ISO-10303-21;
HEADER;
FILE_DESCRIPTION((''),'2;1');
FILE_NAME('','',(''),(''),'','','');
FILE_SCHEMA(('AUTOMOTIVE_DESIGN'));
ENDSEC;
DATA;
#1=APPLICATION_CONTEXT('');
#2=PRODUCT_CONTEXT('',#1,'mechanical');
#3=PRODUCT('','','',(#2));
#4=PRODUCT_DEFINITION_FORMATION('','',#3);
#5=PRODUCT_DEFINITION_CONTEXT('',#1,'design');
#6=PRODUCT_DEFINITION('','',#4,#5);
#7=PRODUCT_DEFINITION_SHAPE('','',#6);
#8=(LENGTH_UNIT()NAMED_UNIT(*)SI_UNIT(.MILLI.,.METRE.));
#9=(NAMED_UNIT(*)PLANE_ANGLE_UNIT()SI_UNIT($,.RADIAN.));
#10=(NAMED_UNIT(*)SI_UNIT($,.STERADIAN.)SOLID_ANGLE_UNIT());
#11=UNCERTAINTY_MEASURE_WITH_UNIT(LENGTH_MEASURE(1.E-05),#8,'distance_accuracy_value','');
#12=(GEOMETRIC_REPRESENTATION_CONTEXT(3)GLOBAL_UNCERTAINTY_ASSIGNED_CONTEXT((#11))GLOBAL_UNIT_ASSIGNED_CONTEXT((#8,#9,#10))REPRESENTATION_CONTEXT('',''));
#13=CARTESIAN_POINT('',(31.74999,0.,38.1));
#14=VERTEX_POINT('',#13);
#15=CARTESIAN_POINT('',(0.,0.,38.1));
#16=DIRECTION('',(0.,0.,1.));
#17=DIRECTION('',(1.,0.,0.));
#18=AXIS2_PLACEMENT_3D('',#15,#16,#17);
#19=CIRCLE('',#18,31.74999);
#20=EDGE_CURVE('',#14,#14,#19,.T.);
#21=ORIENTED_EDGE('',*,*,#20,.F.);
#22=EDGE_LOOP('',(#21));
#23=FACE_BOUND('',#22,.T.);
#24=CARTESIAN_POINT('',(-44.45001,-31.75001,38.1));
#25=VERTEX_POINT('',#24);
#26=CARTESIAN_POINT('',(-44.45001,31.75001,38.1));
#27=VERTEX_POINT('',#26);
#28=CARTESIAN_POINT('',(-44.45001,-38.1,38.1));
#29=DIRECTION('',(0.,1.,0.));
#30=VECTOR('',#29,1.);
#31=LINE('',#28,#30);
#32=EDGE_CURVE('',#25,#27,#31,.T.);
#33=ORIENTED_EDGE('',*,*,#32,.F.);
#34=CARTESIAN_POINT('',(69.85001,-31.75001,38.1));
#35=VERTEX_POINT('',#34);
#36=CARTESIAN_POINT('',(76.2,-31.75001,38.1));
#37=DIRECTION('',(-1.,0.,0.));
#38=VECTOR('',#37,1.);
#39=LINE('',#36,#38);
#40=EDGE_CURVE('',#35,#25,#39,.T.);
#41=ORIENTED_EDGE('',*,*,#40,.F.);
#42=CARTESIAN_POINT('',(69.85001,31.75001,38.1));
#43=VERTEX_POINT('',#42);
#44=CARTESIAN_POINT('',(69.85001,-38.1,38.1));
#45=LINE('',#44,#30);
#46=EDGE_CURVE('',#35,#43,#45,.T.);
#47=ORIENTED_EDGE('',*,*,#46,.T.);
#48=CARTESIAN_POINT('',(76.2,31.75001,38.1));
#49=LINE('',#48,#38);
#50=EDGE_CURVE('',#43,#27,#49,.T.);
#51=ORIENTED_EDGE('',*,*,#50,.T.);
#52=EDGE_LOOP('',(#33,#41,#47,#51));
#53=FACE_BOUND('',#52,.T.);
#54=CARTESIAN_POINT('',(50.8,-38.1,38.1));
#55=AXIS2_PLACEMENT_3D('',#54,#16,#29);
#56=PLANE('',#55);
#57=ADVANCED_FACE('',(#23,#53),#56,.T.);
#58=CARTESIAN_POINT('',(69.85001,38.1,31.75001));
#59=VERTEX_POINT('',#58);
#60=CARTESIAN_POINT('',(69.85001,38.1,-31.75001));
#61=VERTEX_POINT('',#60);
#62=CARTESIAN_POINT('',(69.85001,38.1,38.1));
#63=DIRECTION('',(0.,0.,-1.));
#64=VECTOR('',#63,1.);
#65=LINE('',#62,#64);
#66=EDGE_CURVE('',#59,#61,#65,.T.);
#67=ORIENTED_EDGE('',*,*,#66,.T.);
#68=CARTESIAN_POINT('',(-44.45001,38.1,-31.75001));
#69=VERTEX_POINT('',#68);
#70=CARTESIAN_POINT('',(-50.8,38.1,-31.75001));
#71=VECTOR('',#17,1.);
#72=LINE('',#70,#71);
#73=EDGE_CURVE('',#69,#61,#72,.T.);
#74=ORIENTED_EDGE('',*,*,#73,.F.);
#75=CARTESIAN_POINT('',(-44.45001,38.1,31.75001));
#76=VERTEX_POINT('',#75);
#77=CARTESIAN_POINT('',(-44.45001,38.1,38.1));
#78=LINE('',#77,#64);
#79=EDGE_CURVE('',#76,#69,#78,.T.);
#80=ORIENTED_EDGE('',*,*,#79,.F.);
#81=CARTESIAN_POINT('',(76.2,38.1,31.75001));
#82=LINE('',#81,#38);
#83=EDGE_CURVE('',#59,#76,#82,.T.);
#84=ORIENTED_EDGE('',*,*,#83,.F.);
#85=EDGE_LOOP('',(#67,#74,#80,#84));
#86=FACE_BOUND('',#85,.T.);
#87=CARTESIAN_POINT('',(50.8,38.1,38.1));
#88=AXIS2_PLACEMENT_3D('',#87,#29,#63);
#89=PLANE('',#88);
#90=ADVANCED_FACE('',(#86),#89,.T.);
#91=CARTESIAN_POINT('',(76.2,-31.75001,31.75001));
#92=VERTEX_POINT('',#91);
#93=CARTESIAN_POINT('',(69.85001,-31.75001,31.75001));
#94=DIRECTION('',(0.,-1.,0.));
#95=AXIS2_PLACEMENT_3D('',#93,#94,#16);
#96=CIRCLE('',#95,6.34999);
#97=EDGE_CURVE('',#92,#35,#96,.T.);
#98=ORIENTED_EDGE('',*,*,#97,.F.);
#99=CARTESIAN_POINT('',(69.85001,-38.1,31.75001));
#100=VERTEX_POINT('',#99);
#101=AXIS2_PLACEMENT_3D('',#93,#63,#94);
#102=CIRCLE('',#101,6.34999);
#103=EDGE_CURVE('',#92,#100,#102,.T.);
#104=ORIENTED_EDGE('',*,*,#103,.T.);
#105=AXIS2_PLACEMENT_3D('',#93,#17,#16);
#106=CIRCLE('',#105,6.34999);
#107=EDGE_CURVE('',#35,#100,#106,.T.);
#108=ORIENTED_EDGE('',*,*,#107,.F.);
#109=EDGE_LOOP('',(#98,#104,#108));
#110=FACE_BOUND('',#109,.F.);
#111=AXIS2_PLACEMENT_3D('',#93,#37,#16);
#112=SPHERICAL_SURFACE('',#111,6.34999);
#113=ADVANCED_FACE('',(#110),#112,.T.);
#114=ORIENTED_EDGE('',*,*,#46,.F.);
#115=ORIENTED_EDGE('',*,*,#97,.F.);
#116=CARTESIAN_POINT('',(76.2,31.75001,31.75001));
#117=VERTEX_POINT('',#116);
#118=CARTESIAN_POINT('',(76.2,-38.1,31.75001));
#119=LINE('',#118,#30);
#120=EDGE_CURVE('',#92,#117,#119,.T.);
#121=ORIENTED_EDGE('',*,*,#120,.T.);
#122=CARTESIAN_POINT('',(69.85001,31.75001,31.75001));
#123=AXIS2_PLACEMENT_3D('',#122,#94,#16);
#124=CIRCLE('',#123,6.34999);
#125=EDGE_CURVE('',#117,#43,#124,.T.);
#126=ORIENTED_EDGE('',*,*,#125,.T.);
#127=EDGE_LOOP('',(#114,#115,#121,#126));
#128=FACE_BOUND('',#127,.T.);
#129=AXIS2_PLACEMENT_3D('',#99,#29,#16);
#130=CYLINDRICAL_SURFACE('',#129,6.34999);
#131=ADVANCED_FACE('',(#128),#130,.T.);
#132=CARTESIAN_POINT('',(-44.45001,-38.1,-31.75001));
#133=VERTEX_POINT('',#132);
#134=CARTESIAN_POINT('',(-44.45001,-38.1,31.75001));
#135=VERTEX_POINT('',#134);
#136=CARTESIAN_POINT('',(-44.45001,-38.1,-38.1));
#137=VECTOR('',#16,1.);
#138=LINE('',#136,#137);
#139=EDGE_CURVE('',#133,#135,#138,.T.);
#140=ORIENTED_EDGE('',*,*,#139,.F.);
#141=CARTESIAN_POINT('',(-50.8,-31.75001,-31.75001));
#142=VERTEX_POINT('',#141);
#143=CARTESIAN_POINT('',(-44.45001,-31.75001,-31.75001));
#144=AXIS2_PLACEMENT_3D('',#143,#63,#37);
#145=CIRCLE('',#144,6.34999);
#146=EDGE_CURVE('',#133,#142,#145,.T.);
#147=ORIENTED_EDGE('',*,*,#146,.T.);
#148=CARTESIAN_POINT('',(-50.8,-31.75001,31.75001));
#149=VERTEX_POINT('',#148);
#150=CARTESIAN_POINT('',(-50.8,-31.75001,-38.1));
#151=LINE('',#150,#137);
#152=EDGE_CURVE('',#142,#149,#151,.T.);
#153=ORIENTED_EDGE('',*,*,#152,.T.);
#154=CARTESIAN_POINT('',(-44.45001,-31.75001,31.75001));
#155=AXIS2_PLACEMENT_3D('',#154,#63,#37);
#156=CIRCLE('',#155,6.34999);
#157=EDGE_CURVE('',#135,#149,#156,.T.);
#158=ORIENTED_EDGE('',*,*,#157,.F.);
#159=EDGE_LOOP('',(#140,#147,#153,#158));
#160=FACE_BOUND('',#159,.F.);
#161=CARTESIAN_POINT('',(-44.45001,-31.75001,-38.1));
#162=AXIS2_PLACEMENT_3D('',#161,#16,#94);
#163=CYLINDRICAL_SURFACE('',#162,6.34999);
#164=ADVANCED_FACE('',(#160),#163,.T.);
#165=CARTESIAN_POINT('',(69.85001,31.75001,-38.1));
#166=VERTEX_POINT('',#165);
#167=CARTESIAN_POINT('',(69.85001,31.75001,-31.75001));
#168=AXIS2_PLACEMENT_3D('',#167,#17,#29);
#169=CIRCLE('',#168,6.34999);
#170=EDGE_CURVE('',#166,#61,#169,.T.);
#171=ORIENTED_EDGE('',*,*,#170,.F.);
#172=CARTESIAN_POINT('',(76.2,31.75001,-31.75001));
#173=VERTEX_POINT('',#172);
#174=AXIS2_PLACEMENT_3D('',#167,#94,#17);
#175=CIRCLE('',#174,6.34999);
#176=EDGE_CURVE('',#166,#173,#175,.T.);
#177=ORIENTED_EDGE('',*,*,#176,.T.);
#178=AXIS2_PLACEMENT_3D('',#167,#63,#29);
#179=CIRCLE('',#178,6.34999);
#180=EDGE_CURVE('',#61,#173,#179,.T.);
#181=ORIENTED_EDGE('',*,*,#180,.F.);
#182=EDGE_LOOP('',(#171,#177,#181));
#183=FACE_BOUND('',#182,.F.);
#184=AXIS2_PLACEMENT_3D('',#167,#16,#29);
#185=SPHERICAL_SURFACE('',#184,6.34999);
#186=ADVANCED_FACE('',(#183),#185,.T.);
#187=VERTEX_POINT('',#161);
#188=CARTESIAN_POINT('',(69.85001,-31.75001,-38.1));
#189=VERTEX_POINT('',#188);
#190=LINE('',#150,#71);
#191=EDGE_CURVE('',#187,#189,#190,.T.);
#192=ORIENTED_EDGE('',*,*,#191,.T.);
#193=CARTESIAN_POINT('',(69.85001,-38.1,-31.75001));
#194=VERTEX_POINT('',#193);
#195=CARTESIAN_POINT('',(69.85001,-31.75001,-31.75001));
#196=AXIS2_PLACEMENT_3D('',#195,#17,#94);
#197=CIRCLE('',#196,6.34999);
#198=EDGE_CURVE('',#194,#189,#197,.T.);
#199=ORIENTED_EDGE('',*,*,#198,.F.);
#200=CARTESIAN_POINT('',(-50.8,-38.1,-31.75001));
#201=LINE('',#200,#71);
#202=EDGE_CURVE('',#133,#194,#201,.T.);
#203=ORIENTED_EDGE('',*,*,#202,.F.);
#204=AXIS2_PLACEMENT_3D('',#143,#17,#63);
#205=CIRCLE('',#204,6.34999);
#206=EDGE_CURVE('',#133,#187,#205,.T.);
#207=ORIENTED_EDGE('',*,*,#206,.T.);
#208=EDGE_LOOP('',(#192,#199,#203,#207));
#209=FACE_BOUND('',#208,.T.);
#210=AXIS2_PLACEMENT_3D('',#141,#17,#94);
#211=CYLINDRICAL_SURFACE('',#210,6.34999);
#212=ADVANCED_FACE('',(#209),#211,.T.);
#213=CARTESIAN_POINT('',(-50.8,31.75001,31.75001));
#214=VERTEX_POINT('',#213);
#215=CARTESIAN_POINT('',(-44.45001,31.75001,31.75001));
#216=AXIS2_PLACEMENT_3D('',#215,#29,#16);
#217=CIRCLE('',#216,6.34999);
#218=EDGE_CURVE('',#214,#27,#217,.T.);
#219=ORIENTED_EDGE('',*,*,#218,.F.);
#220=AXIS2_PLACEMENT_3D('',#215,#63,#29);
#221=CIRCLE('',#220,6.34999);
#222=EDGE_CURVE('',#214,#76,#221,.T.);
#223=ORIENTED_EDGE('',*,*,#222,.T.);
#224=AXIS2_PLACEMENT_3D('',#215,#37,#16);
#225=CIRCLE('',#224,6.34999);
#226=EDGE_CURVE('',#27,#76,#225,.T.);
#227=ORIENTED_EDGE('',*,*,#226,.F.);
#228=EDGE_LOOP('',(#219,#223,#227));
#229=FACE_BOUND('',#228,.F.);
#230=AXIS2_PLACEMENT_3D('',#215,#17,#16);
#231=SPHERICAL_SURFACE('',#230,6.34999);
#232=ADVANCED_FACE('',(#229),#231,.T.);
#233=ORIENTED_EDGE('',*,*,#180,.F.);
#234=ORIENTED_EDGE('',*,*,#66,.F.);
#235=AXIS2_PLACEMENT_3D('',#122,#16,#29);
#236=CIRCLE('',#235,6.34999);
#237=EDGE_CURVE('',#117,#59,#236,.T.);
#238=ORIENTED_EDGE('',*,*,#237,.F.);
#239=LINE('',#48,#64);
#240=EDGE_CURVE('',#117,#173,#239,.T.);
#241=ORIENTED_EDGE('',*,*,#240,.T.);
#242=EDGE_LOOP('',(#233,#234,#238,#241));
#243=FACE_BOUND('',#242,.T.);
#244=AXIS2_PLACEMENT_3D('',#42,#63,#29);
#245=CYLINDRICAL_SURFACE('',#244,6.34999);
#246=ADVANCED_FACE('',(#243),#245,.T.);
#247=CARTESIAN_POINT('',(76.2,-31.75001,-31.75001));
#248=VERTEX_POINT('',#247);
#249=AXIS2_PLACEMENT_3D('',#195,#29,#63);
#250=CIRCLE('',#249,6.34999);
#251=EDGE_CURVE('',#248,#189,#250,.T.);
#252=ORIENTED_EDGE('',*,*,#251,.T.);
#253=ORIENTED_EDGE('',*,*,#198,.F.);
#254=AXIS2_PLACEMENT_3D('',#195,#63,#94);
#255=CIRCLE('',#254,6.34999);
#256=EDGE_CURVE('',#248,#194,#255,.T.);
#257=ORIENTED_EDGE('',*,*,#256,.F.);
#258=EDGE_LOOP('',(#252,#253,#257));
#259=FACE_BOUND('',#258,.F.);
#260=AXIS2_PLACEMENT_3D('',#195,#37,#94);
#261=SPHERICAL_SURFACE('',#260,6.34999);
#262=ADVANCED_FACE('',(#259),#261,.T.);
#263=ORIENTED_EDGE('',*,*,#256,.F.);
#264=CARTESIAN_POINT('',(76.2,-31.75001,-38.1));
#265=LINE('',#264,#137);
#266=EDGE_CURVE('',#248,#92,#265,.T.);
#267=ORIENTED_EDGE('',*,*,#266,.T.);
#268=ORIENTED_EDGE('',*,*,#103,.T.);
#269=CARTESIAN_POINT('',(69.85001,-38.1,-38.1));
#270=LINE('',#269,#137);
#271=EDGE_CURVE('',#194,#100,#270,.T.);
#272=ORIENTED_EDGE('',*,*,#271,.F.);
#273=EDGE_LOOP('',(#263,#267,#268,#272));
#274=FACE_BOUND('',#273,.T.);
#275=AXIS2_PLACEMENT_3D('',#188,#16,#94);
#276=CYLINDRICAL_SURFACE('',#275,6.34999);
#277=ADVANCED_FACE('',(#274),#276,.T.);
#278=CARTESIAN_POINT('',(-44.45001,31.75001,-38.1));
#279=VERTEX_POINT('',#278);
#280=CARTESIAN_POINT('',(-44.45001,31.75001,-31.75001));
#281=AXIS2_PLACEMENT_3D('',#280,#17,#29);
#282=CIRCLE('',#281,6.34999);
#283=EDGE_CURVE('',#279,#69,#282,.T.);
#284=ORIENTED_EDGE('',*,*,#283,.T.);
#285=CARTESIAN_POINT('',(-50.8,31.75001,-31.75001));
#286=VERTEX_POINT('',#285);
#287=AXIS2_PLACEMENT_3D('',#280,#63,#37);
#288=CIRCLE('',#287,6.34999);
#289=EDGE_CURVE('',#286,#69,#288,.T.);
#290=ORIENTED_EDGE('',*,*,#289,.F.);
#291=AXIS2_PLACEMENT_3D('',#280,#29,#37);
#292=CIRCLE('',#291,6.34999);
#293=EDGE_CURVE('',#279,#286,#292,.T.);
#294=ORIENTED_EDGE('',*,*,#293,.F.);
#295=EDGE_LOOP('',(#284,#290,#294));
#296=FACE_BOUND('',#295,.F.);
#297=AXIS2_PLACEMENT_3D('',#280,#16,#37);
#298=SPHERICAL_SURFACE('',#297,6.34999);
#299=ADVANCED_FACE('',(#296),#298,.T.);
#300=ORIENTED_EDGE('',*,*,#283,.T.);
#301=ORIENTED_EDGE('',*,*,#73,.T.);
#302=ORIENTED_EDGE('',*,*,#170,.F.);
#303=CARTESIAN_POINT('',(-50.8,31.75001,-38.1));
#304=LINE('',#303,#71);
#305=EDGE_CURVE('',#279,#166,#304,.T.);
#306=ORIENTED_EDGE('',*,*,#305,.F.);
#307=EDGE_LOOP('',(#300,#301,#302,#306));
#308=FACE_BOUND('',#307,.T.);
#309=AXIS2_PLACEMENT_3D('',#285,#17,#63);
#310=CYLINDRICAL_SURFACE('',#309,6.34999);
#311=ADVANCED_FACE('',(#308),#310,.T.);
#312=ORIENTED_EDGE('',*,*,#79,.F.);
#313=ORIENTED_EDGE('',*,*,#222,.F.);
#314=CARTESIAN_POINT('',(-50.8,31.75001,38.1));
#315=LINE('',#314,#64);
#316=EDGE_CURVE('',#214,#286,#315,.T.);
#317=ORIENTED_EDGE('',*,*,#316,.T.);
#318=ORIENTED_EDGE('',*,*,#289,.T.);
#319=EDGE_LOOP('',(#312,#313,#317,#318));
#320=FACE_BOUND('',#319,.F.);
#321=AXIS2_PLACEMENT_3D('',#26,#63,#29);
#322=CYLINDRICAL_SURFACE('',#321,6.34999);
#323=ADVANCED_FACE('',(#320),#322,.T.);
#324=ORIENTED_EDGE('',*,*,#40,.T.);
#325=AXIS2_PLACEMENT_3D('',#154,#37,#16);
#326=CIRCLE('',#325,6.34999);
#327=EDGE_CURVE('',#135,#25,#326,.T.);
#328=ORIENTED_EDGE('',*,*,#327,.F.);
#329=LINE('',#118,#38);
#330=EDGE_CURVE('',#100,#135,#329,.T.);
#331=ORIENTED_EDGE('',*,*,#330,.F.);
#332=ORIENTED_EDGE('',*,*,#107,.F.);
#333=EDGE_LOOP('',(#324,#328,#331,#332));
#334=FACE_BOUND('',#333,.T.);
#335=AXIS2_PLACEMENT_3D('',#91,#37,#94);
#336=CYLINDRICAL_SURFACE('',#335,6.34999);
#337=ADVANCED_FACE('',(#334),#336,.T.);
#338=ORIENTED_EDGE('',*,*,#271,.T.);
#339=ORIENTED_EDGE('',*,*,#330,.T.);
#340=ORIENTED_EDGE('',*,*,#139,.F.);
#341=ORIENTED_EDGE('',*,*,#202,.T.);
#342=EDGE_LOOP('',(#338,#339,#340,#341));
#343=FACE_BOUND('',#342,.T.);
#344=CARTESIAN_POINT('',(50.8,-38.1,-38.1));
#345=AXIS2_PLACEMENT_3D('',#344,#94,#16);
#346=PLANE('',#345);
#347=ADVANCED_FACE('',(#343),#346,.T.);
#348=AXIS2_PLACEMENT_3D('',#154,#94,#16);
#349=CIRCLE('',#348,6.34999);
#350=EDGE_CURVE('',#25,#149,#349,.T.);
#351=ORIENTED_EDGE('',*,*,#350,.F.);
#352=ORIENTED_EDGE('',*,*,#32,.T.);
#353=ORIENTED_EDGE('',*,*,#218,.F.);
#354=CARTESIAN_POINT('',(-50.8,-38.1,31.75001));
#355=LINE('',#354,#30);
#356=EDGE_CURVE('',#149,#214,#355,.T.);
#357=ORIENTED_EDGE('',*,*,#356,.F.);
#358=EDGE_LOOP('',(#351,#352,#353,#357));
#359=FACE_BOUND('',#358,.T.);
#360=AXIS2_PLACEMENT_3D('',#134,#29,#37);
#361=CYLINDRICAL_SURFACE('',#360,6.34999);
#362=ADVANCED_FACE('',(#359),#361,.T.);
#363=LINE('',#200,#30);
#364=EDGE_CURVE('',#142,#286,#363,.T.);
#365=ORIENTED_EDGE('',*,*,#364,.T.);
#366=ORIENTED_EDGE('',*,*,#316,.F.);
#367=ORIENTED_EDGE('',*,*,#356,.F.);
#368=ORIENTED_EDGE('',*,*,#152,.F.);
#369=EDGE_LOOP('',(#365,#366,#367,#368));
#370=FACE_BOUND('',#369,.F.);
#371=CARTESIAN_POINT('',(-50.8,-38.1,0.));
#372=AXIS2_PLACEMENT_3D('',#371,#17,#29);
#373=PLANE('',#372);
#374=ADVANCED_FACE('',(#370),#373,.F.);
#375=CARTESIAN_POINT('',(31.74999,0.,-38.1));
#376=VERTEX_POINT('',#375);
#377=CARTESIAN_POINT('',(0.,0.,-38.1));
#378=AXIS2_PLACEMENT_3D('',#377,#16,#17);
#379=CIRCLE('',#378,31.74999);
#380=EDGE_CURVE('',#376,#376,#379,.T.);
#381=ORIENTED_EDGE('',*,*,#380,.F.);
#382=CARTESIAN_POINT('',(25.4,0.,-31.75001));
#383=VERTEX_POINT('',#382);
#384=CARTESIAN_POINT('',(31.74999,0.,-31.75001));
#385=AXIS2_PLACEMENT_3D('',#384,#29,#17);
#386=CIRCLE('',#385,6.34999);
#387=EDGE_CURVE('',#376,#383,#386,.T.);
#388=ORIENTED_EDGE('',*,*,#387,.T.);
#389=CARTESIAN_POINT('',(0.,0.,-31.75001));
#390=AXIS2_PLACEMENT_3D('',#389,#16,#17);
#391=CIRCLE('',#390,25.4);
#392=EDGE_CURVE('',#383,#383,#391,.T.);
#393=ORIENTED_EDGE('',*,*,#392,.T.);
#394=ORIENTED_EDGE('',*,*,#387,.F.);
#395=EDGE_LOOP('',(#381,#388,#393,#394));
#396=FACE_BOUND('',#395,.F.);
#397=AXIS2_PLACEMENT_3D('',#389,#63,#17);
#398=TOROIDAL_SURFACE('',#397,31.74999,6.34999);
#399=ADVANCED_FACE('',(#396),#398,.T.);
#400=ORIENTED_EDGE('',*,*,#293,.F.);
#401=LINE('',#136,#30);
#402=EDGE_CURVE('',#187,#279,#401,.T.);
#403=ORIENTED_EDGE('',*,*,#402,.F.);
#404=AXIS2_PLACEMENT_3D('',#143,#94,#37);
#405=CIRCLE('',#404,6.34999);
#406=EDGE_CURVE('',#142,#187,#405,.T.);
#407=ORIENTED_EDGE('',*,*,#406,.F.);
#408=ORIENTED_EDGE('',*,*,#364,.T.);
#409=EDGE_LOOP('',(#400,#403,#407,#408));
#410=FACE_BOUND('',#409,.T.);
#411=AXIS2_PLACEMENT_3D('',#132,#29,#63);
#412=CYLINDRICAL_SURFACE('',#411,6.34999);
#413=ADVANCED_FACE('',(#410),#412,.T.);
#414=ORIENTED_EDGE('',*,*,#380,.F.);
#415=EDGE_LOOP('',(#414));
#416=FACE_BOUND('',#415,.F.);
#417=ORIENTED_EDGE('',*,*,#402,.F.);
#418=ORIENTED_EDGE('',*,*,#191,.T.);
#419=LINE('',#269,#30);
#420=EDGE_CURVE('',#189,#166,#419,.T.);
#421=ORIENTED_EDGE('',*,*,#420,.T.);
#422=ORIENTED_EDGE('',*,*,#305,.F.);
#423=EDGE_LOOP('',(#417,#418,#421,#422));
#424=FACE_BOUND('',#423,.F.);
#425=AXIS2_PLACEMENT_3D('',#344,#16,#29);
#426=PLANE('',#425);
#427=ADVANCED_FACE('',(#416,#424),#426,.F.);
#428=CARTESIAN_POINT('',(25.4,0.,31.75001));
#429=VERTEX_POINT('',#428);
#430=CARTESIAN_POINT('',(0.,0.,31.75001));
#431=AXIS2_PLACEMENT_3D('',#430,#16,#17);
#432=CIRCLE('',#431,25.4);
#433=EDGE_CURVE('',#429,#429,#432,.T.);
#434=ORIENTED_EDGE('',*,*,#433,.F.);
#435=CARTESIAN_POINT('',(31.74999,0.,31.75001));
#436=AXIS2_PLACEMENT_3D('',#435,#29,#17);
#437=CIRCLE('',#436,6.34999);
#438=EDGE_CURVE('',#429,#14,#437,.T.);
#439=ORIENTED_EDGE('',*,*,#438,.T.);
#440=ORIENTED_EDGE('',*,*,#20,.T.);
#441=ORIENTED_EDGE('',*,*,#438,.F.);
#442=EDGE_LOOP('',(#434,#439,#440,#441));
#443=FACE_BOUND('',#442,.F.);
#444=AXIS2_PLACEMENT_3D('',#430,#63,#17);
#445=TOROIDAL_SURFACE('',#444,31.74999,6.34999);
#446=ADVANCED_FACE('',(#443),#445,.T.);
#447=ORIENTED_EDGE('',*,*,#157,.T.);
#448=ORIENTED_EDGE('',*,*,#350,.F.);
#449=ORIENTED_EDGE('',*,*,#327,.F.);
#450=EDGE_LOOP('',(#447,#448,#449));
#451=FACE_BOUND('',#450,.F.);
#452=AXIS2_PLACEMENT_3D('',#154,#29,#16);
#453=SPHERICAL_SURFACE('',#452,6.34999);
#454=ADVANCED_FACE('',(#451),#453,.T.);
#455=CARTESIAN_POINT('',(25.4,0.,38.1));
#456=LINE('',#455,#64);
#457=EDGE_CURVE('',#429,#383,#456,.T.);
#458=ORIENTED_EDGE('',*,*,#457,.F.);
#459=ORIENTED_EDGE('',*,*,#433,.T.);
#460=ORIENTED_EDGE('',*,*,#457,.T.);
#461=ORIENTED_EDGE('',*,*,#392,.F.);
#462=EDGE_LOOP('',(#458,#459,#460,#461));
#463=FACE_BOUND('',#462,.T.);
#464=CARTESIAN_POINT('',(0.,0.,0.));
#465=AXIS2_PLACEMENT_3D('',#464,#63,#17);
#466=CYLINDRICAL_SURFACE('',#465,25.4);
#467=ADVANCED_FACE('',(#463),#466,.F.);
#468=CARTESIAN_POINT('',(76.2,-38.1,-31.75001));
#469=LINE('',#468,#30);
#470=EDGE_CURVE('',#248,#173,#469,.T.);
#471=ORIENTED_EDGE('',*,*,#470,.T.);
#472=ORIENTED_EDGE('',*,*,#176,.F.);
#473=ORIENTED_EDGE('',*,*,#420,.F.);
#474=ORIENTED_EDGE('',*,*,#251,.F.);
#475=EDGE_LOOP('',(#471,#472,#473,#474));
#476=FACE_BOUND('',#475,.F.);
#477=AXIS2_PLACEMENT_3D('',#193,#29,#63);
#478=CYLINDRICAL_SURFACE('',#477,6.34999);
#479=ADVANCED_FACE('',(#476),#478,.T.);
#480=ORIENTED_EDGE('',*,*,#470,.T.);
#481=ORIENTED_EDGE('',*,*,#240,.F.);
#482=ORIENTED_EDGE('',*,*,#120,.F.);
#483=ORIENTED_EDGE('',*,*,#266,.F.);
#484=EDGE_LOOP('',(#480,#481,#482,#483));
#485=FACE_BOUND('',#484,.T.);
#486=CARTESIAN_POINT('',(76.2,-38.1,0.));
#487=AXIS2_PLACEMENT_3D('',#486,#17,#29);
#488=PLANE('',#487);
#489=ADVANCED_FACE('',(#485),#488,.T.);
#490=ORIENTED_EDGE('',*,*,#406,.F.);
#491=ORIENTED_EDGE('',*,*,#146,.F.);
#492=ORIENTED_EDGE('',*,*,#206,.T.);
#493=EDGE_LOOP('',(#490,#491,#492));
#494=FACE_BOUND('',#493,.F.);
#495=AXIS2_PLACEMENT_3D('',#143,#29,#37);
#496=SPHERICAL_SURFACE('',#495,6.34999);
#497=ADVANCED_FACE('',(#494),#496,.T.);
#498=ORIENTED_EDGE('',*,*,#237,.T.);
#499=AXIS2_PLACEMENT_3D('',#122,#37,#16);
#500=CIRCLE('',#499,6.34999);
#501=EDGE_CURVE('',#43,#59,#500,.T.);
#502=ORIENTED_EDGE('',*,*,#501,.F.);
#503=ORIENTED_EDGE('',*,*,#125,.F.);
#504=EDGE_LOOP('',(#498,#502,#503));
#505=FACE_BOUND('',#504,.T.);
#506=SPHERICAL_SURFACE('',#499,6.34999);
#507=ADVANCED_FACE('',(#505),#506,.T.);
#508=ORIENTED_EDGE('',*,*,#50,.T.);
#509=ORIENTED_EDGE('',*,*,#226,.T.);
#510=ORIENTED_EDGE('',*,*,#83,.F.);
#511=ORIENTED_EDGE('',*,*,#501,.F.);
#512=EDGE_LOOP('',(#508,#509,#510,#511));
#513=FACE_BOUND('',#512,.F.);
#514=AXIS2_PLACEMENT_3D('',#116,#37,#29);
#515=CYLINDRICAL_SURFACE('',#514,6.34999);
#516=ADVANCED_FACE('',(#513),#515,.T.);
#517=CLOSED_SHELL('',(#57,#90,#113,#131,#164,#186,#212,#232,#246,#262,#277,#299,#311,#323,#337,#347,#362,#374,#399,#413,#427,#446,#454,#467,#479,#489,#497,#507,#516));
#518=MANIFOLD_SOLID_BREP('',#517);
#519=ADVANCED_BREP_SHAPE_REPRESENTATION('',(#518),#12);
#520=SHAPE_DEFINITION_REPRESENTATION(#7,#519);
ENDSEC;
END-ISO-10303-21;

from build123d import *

# Parameters (mm, degrees)
F0_W     = 101.6
F0_H     = 76.2
F0_R     = 25.4
F1_DEPTH = 38.1
F2_DEPTH = 25.4
F3_R     = 6.34999


# Not quite as in the source:
# - a fillet or chamfer is up to 0.001 mm smaller than in the source, because OpenCascade refuses the exact size


with BuildPart() as f1:
    # F0 (on Top) → F1 (new body, symmetric)
    with BuildSketch(Plane.XY):
        Rectangle(F0_W, F0_H)
        Circle(F0_R, mode=Mode.SUBTRACT)
    extrude(amount=F1_DEPTH, both=True)

    # F2 (add): a face of the model
    f2_faces = [f1.faces().sort_by_distance(p)[0] for p in [
        (50.8, 0, 0),
    ]]
    extrude(f2_faces, amount=F2_DEPTH)

    # F3 (radius 6.35 in the source; OpenCascade refuses exactly that, so slightly less here)
    f3_edges = [f1.edges().sort_by_distance(p)[0] for p in [
        (12.7, 38.1, 38.1),
        (-50.8, 0, 38.1),
        (12.7, -38.1, 38.1),
        (76.2, 0, 38.1),
        (-25.4, 0, 38.1),
        (-50.8, 38.1, 0),
        (-50.8, 0, -38.1),
        (-50.8, -38.1, 0),
        (76.2, 38.1, 0),
        (12.7, 38.1, -38.1),
        (12.7, -38.1, -38.1),
        (76.2, -38.1, 0),
        (76.2, 0, -38.1),
        (-25.4, 0, -38.1),
    ]]
    fillet(f3_edges, radius=F3_R)


solid = f1.part
